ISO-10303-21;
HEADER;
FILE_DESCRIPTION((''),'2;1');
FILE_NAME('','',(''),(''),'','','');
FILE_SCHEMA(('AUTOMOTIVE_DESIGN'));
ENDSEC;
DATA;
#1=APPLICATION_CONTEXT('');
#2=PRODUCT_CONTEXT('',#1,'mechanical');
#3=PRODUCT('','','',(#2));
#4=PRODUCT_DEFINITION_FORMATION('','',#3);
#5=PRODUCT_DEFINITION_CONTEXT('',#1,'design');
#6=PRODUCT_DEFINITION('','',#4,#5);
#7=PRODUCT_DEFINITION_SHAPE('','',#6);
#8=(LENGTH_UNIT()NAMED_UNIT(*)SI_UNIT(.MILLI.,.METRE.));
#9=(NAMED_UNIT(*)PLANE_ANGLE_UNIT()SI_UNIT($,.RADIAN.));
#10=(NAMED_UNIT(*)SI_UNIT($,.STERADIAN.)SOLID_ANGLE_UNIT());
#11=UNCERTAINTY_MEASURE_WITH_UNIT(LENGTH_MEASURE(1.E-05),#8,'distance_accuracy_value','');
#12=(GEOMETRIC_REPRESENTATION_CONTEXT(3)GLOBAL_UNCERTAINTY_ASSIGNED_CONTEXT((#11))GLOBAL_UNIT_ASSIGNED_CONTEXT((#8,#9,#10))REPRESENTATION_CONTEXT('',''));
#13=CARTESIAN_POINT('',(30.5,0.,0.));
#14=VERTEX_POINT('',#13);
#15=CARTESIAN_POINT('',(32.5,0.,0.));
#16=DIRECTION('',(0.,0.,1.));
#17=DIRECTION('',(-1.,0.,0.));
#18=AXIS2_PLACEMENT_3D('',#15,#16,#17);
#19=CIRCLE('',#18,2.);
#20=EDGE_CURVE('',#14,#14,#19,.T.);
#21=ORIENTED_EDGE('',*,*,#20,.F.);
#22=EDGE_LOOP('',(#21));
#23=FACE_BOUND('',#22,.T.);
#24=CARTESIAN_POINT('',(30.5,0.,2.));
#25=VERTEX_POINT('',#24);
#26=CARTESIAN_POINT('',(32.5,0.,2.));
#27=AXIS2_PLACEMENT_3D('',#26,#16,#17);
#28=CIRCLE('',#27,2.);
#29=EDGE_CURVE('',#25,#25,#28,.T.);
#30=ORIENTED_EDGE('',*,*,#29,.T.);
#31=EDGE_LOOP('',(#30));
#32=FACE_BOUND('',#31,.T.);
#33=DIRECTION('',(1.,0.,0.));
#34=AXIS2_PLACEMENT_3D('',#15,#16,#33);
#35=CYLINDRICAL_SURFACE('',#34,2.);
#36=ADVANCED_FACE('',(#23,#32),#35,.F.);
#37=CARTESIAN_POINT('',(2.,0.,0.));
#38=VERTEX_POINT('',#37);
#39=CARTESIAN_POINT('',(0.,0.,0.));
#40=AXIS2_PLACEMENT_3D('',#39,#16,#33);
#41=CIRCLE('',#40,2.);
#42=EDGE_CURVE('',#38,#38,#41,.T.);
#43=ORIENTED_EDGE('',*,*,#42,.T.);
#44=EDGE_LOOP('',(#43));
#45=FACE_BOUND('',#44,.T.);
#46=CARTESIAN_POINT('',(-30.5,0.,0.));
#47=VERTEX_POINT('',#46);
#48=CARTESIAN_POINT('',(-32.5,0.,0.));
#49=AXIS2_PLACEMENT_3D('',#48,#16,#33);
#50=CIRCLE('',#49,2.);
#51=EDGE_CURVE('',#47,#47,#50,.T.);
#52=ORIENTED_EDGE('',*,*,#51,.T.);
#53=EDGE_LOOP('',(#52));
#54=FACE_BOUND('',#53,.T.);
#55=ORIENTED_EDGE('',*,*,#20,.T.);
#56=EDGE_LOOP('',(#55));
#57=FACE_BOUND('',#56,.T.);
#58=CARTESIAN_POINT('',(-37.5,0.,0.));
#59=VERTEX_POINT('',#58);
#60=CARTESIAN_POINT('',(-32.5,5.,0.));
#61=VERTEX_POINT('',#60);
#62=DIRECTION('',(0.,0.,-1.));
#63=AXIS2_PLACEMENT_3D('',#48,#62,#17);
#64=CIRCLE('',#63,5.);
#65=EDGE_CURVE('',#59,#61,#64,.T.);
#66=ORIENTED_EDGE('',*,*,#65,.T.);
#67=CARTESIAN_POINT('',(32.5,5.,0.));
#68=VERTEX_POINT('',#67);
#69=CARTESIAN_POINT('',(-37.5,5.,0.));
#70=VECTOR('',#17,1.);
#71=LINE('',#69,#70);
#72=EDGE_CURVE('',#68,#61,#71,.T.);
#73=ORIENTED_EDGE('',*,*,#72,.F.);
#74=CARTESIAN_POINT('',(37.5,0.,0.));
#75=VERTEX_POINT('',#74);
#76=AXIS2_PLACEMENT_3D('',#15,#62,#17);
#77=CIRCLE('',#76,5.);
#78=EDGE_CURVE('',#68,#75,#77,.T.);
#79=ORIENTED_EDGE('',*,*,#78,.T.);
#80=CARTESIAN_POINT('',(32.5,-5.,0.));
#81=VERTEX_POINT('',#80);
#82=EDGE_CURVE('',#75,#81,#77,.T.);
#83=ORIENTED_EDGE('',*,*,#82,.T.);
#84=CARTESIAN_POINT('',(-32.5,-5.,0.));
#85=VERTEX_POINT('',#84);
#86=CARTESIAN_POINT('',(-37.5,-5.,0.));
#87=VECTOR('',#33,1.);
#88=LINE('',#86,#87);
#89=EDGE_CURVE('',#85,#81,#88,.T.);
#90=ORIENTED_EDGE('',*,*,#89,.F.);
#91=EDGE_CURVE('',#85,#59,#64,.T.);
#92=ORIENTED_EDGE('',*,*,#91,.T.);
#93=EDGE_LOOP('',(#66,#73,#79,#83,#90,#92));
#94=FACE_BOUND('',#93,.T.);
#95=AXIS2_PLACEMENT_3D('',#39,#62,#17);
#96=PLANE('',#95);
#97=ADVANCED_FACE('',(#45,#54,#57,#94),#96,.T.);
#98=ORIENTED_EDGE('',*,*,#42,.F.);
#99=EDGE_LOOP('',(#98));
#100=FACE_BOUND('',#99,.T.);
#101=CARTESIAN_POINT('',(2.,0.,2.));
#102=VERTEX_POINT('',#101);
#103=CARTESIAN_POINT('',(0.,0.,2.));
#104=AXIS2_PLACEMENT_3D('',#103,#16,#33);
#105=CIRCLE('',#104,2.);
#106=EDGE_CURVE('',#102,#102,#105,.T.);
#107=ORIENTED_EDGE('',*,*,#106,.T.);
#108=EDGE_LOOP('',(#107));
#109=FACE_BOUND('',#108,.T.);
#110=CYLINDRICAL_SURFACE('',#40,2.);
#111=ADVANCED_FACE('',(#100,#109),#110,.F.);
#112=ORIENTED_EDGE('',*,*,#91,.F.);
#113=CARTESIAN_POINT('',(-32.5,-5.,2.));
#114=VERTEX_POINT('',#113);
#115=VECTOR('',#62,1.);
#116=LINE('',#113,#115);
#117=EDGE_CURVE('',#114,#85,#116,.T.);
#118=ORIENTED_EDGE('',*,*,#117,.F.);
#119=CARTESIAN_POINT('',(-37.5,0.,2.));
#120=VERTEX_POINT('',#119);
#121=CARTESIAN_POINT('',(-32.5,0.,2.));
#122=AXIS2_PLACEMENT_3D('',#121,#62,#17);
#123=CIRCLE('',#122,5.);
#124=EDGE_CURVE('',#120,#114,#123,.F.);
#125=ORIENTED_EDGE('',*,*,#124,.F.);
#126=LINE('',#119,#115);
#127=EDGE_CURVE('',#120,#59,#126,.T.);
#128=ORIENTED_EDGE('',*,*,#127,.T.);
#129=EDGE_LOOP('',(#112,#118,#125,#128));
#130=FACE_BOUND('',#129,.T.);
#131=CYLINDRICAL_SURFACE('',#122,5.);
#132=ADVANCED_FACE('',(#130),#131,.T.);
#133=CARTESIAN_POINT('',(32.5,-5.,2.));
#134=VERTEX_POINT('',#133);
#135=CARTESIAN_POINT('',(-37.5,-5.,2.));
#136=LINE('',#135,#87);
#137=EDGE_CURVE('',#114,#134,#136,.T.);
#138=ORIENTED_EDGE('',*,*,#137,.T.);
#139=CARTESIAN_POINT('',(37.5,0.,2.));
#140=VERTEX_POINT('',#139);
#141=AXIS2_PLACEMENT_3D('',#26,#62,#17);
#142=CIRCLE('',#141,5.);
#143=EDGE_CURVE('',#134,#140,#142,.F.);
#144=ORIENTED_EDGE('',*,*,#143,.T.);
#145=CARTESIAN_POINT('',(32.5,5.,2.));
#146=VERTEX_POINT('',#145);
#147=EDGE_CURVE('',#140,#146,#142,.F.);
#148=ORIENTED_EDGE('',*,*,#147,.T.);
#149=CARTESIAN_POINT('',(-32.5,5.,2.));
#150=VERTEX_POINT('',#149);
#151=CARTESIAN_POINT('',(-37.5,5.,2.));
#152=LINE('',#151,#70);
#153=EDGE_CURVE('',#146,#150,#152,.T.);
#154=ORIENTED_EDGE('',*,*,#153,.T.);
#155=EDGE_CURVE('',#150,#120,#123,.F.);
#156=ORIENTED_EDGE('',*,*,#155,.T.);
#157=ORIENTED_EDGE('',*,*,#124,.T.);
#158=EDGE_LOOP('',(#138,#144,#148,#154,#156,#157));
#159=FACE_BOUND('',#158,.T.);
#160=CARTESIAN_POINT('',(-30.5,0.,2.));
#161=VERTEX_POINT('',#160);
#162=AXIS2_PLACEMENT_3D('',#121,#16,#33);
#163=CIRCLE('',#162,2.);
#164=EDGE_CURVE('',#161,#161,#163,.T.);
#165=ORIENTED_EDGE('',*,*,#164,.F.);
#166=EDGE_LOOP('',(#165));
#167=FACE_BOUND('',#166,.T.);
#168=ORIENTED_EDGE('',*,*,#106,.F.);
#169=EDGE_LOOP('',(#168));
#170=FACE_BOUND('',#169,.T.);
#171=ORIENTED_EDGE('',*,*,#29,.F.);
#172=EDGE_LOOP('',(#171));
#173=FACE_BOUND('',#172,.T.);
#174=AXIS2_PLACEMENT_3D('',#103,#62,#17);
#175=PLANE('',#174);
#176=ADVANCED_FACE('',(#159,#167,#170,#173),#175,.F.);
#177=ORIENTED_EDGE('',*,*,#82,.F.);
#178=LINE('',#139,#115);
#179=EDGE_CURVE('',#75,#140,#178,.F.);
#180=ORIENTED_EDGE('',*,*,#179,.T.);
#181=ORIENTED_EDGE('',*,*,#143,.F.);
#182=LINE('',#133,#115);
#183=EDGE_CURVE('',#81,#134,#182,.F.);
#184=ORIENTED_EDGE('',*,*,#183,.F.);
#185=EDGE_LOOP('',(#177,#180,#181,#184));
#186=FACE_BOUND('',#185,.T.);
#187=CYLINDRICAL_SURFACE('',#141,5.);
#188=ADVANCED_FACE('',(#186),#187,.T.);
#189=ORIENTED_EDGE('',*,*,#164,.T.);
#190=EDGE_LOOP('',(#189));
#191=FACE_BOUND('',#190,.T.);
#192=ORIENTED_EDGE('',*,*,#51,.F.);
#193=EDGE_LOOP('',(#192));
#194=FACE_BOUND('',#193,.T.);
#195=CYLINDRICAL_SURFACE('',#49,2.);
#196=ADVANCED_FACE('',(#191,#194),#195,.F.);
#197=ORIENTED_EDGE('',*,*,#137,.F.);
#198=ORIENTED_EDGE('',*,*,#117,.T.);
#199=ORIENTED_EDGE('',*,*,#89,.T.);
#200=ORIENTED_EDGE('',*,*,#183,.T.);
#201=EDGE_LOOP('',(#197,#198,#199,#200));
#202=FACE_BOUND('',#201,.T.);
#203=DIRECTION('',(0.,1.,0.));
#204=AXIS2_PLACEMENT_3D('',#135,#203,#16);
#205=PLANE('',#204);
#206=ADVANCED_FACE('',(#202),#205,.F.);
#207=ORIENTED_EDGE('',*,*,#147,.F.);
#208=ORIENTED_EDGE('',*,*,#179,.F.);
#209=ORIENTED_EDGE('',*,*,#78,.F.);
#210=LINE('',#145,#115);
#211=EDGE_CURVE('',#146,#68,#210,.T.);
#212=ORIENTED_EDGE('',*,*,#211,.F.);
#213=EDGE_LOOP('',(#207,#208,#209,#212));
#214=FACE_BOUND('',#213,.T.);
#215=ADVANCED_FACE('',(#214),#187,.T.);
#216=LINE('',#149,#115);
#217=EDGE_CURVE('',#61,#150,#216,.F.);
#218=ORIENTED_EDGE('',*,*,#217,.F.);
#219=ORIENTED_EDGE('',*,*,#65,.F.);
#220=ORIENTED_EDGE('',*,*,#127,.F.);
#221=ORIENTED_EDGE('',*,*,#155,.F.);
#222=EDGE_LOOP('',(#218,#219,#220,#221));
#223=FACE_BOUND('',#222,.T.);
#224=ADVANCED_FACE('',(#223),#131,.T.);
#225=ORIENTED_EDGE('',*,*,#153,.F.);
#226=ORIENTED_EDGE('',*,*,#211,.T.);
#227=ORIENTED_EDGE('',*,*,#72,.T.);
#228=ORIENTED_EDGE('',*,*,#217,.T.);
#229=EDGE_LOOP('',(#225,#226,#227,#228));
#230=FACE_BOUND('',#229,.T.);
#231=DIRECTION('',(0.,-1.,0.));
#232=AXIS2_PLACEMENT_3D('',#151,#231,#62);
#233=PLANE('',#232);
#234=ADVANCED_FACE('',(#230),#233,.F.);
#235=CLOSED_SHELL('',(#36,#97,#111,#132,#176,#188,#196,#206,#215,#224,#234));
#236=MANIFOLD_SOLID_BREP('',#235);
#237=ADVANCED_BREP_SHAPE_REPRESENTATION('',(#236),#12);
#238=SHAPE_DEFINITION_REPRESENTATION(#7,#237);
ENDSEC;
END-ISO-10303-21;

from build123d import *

# Parameters (mm, degrees)
SKETCH_1_W          = 75
SKETCH_1_H          = 10
EXTRUDE_1_DEPTH     = 2
FILLET_1_R          = 5
SKETCH_3_R          = 2
CUT_EXTRUDE_1_DEPTH = 2


with BuildPart() as part:
    # 草图1 → 凸台-拉伸1 (new body)
    with BuildSketch(Plane.XY):
        Rectangle(SKETCH_1_W, SKETCH_1_H)
    extrude(amount=EXTRUDE_1_DEPTH)

    # 圆角1
    fillet_1_edges = [part.edges().sort_by_distance(p)[0] for p in [
        (37.5, -5, 1),
        (-37.5, -5, 1),
        (-37.5, 5, 1),
        (37.5, 5, 1),
    ]]
    fillet(fillet_1_edges, radius=FILLET_1_R - 0.0001)  # a hair under: the kernel refuses the full size

    # 草图3 → 切除-拉伸1 (cut)
    with BuildSketch(Plane.XY.offset(2)):
        with Locations((-32.5, 0)):
            Circle(SKETCH_3_R)
        with Locations(Location((32.5, 0, 0), (0, 0, 180))):
            Circle(SKETCH_3_R)
        Circle(SKETCH_3_R)
    extrude(amount=-CUT_EXTRUDE_1_DEPTH, mode=Mode.SUBTRACT)


solid = part.part
